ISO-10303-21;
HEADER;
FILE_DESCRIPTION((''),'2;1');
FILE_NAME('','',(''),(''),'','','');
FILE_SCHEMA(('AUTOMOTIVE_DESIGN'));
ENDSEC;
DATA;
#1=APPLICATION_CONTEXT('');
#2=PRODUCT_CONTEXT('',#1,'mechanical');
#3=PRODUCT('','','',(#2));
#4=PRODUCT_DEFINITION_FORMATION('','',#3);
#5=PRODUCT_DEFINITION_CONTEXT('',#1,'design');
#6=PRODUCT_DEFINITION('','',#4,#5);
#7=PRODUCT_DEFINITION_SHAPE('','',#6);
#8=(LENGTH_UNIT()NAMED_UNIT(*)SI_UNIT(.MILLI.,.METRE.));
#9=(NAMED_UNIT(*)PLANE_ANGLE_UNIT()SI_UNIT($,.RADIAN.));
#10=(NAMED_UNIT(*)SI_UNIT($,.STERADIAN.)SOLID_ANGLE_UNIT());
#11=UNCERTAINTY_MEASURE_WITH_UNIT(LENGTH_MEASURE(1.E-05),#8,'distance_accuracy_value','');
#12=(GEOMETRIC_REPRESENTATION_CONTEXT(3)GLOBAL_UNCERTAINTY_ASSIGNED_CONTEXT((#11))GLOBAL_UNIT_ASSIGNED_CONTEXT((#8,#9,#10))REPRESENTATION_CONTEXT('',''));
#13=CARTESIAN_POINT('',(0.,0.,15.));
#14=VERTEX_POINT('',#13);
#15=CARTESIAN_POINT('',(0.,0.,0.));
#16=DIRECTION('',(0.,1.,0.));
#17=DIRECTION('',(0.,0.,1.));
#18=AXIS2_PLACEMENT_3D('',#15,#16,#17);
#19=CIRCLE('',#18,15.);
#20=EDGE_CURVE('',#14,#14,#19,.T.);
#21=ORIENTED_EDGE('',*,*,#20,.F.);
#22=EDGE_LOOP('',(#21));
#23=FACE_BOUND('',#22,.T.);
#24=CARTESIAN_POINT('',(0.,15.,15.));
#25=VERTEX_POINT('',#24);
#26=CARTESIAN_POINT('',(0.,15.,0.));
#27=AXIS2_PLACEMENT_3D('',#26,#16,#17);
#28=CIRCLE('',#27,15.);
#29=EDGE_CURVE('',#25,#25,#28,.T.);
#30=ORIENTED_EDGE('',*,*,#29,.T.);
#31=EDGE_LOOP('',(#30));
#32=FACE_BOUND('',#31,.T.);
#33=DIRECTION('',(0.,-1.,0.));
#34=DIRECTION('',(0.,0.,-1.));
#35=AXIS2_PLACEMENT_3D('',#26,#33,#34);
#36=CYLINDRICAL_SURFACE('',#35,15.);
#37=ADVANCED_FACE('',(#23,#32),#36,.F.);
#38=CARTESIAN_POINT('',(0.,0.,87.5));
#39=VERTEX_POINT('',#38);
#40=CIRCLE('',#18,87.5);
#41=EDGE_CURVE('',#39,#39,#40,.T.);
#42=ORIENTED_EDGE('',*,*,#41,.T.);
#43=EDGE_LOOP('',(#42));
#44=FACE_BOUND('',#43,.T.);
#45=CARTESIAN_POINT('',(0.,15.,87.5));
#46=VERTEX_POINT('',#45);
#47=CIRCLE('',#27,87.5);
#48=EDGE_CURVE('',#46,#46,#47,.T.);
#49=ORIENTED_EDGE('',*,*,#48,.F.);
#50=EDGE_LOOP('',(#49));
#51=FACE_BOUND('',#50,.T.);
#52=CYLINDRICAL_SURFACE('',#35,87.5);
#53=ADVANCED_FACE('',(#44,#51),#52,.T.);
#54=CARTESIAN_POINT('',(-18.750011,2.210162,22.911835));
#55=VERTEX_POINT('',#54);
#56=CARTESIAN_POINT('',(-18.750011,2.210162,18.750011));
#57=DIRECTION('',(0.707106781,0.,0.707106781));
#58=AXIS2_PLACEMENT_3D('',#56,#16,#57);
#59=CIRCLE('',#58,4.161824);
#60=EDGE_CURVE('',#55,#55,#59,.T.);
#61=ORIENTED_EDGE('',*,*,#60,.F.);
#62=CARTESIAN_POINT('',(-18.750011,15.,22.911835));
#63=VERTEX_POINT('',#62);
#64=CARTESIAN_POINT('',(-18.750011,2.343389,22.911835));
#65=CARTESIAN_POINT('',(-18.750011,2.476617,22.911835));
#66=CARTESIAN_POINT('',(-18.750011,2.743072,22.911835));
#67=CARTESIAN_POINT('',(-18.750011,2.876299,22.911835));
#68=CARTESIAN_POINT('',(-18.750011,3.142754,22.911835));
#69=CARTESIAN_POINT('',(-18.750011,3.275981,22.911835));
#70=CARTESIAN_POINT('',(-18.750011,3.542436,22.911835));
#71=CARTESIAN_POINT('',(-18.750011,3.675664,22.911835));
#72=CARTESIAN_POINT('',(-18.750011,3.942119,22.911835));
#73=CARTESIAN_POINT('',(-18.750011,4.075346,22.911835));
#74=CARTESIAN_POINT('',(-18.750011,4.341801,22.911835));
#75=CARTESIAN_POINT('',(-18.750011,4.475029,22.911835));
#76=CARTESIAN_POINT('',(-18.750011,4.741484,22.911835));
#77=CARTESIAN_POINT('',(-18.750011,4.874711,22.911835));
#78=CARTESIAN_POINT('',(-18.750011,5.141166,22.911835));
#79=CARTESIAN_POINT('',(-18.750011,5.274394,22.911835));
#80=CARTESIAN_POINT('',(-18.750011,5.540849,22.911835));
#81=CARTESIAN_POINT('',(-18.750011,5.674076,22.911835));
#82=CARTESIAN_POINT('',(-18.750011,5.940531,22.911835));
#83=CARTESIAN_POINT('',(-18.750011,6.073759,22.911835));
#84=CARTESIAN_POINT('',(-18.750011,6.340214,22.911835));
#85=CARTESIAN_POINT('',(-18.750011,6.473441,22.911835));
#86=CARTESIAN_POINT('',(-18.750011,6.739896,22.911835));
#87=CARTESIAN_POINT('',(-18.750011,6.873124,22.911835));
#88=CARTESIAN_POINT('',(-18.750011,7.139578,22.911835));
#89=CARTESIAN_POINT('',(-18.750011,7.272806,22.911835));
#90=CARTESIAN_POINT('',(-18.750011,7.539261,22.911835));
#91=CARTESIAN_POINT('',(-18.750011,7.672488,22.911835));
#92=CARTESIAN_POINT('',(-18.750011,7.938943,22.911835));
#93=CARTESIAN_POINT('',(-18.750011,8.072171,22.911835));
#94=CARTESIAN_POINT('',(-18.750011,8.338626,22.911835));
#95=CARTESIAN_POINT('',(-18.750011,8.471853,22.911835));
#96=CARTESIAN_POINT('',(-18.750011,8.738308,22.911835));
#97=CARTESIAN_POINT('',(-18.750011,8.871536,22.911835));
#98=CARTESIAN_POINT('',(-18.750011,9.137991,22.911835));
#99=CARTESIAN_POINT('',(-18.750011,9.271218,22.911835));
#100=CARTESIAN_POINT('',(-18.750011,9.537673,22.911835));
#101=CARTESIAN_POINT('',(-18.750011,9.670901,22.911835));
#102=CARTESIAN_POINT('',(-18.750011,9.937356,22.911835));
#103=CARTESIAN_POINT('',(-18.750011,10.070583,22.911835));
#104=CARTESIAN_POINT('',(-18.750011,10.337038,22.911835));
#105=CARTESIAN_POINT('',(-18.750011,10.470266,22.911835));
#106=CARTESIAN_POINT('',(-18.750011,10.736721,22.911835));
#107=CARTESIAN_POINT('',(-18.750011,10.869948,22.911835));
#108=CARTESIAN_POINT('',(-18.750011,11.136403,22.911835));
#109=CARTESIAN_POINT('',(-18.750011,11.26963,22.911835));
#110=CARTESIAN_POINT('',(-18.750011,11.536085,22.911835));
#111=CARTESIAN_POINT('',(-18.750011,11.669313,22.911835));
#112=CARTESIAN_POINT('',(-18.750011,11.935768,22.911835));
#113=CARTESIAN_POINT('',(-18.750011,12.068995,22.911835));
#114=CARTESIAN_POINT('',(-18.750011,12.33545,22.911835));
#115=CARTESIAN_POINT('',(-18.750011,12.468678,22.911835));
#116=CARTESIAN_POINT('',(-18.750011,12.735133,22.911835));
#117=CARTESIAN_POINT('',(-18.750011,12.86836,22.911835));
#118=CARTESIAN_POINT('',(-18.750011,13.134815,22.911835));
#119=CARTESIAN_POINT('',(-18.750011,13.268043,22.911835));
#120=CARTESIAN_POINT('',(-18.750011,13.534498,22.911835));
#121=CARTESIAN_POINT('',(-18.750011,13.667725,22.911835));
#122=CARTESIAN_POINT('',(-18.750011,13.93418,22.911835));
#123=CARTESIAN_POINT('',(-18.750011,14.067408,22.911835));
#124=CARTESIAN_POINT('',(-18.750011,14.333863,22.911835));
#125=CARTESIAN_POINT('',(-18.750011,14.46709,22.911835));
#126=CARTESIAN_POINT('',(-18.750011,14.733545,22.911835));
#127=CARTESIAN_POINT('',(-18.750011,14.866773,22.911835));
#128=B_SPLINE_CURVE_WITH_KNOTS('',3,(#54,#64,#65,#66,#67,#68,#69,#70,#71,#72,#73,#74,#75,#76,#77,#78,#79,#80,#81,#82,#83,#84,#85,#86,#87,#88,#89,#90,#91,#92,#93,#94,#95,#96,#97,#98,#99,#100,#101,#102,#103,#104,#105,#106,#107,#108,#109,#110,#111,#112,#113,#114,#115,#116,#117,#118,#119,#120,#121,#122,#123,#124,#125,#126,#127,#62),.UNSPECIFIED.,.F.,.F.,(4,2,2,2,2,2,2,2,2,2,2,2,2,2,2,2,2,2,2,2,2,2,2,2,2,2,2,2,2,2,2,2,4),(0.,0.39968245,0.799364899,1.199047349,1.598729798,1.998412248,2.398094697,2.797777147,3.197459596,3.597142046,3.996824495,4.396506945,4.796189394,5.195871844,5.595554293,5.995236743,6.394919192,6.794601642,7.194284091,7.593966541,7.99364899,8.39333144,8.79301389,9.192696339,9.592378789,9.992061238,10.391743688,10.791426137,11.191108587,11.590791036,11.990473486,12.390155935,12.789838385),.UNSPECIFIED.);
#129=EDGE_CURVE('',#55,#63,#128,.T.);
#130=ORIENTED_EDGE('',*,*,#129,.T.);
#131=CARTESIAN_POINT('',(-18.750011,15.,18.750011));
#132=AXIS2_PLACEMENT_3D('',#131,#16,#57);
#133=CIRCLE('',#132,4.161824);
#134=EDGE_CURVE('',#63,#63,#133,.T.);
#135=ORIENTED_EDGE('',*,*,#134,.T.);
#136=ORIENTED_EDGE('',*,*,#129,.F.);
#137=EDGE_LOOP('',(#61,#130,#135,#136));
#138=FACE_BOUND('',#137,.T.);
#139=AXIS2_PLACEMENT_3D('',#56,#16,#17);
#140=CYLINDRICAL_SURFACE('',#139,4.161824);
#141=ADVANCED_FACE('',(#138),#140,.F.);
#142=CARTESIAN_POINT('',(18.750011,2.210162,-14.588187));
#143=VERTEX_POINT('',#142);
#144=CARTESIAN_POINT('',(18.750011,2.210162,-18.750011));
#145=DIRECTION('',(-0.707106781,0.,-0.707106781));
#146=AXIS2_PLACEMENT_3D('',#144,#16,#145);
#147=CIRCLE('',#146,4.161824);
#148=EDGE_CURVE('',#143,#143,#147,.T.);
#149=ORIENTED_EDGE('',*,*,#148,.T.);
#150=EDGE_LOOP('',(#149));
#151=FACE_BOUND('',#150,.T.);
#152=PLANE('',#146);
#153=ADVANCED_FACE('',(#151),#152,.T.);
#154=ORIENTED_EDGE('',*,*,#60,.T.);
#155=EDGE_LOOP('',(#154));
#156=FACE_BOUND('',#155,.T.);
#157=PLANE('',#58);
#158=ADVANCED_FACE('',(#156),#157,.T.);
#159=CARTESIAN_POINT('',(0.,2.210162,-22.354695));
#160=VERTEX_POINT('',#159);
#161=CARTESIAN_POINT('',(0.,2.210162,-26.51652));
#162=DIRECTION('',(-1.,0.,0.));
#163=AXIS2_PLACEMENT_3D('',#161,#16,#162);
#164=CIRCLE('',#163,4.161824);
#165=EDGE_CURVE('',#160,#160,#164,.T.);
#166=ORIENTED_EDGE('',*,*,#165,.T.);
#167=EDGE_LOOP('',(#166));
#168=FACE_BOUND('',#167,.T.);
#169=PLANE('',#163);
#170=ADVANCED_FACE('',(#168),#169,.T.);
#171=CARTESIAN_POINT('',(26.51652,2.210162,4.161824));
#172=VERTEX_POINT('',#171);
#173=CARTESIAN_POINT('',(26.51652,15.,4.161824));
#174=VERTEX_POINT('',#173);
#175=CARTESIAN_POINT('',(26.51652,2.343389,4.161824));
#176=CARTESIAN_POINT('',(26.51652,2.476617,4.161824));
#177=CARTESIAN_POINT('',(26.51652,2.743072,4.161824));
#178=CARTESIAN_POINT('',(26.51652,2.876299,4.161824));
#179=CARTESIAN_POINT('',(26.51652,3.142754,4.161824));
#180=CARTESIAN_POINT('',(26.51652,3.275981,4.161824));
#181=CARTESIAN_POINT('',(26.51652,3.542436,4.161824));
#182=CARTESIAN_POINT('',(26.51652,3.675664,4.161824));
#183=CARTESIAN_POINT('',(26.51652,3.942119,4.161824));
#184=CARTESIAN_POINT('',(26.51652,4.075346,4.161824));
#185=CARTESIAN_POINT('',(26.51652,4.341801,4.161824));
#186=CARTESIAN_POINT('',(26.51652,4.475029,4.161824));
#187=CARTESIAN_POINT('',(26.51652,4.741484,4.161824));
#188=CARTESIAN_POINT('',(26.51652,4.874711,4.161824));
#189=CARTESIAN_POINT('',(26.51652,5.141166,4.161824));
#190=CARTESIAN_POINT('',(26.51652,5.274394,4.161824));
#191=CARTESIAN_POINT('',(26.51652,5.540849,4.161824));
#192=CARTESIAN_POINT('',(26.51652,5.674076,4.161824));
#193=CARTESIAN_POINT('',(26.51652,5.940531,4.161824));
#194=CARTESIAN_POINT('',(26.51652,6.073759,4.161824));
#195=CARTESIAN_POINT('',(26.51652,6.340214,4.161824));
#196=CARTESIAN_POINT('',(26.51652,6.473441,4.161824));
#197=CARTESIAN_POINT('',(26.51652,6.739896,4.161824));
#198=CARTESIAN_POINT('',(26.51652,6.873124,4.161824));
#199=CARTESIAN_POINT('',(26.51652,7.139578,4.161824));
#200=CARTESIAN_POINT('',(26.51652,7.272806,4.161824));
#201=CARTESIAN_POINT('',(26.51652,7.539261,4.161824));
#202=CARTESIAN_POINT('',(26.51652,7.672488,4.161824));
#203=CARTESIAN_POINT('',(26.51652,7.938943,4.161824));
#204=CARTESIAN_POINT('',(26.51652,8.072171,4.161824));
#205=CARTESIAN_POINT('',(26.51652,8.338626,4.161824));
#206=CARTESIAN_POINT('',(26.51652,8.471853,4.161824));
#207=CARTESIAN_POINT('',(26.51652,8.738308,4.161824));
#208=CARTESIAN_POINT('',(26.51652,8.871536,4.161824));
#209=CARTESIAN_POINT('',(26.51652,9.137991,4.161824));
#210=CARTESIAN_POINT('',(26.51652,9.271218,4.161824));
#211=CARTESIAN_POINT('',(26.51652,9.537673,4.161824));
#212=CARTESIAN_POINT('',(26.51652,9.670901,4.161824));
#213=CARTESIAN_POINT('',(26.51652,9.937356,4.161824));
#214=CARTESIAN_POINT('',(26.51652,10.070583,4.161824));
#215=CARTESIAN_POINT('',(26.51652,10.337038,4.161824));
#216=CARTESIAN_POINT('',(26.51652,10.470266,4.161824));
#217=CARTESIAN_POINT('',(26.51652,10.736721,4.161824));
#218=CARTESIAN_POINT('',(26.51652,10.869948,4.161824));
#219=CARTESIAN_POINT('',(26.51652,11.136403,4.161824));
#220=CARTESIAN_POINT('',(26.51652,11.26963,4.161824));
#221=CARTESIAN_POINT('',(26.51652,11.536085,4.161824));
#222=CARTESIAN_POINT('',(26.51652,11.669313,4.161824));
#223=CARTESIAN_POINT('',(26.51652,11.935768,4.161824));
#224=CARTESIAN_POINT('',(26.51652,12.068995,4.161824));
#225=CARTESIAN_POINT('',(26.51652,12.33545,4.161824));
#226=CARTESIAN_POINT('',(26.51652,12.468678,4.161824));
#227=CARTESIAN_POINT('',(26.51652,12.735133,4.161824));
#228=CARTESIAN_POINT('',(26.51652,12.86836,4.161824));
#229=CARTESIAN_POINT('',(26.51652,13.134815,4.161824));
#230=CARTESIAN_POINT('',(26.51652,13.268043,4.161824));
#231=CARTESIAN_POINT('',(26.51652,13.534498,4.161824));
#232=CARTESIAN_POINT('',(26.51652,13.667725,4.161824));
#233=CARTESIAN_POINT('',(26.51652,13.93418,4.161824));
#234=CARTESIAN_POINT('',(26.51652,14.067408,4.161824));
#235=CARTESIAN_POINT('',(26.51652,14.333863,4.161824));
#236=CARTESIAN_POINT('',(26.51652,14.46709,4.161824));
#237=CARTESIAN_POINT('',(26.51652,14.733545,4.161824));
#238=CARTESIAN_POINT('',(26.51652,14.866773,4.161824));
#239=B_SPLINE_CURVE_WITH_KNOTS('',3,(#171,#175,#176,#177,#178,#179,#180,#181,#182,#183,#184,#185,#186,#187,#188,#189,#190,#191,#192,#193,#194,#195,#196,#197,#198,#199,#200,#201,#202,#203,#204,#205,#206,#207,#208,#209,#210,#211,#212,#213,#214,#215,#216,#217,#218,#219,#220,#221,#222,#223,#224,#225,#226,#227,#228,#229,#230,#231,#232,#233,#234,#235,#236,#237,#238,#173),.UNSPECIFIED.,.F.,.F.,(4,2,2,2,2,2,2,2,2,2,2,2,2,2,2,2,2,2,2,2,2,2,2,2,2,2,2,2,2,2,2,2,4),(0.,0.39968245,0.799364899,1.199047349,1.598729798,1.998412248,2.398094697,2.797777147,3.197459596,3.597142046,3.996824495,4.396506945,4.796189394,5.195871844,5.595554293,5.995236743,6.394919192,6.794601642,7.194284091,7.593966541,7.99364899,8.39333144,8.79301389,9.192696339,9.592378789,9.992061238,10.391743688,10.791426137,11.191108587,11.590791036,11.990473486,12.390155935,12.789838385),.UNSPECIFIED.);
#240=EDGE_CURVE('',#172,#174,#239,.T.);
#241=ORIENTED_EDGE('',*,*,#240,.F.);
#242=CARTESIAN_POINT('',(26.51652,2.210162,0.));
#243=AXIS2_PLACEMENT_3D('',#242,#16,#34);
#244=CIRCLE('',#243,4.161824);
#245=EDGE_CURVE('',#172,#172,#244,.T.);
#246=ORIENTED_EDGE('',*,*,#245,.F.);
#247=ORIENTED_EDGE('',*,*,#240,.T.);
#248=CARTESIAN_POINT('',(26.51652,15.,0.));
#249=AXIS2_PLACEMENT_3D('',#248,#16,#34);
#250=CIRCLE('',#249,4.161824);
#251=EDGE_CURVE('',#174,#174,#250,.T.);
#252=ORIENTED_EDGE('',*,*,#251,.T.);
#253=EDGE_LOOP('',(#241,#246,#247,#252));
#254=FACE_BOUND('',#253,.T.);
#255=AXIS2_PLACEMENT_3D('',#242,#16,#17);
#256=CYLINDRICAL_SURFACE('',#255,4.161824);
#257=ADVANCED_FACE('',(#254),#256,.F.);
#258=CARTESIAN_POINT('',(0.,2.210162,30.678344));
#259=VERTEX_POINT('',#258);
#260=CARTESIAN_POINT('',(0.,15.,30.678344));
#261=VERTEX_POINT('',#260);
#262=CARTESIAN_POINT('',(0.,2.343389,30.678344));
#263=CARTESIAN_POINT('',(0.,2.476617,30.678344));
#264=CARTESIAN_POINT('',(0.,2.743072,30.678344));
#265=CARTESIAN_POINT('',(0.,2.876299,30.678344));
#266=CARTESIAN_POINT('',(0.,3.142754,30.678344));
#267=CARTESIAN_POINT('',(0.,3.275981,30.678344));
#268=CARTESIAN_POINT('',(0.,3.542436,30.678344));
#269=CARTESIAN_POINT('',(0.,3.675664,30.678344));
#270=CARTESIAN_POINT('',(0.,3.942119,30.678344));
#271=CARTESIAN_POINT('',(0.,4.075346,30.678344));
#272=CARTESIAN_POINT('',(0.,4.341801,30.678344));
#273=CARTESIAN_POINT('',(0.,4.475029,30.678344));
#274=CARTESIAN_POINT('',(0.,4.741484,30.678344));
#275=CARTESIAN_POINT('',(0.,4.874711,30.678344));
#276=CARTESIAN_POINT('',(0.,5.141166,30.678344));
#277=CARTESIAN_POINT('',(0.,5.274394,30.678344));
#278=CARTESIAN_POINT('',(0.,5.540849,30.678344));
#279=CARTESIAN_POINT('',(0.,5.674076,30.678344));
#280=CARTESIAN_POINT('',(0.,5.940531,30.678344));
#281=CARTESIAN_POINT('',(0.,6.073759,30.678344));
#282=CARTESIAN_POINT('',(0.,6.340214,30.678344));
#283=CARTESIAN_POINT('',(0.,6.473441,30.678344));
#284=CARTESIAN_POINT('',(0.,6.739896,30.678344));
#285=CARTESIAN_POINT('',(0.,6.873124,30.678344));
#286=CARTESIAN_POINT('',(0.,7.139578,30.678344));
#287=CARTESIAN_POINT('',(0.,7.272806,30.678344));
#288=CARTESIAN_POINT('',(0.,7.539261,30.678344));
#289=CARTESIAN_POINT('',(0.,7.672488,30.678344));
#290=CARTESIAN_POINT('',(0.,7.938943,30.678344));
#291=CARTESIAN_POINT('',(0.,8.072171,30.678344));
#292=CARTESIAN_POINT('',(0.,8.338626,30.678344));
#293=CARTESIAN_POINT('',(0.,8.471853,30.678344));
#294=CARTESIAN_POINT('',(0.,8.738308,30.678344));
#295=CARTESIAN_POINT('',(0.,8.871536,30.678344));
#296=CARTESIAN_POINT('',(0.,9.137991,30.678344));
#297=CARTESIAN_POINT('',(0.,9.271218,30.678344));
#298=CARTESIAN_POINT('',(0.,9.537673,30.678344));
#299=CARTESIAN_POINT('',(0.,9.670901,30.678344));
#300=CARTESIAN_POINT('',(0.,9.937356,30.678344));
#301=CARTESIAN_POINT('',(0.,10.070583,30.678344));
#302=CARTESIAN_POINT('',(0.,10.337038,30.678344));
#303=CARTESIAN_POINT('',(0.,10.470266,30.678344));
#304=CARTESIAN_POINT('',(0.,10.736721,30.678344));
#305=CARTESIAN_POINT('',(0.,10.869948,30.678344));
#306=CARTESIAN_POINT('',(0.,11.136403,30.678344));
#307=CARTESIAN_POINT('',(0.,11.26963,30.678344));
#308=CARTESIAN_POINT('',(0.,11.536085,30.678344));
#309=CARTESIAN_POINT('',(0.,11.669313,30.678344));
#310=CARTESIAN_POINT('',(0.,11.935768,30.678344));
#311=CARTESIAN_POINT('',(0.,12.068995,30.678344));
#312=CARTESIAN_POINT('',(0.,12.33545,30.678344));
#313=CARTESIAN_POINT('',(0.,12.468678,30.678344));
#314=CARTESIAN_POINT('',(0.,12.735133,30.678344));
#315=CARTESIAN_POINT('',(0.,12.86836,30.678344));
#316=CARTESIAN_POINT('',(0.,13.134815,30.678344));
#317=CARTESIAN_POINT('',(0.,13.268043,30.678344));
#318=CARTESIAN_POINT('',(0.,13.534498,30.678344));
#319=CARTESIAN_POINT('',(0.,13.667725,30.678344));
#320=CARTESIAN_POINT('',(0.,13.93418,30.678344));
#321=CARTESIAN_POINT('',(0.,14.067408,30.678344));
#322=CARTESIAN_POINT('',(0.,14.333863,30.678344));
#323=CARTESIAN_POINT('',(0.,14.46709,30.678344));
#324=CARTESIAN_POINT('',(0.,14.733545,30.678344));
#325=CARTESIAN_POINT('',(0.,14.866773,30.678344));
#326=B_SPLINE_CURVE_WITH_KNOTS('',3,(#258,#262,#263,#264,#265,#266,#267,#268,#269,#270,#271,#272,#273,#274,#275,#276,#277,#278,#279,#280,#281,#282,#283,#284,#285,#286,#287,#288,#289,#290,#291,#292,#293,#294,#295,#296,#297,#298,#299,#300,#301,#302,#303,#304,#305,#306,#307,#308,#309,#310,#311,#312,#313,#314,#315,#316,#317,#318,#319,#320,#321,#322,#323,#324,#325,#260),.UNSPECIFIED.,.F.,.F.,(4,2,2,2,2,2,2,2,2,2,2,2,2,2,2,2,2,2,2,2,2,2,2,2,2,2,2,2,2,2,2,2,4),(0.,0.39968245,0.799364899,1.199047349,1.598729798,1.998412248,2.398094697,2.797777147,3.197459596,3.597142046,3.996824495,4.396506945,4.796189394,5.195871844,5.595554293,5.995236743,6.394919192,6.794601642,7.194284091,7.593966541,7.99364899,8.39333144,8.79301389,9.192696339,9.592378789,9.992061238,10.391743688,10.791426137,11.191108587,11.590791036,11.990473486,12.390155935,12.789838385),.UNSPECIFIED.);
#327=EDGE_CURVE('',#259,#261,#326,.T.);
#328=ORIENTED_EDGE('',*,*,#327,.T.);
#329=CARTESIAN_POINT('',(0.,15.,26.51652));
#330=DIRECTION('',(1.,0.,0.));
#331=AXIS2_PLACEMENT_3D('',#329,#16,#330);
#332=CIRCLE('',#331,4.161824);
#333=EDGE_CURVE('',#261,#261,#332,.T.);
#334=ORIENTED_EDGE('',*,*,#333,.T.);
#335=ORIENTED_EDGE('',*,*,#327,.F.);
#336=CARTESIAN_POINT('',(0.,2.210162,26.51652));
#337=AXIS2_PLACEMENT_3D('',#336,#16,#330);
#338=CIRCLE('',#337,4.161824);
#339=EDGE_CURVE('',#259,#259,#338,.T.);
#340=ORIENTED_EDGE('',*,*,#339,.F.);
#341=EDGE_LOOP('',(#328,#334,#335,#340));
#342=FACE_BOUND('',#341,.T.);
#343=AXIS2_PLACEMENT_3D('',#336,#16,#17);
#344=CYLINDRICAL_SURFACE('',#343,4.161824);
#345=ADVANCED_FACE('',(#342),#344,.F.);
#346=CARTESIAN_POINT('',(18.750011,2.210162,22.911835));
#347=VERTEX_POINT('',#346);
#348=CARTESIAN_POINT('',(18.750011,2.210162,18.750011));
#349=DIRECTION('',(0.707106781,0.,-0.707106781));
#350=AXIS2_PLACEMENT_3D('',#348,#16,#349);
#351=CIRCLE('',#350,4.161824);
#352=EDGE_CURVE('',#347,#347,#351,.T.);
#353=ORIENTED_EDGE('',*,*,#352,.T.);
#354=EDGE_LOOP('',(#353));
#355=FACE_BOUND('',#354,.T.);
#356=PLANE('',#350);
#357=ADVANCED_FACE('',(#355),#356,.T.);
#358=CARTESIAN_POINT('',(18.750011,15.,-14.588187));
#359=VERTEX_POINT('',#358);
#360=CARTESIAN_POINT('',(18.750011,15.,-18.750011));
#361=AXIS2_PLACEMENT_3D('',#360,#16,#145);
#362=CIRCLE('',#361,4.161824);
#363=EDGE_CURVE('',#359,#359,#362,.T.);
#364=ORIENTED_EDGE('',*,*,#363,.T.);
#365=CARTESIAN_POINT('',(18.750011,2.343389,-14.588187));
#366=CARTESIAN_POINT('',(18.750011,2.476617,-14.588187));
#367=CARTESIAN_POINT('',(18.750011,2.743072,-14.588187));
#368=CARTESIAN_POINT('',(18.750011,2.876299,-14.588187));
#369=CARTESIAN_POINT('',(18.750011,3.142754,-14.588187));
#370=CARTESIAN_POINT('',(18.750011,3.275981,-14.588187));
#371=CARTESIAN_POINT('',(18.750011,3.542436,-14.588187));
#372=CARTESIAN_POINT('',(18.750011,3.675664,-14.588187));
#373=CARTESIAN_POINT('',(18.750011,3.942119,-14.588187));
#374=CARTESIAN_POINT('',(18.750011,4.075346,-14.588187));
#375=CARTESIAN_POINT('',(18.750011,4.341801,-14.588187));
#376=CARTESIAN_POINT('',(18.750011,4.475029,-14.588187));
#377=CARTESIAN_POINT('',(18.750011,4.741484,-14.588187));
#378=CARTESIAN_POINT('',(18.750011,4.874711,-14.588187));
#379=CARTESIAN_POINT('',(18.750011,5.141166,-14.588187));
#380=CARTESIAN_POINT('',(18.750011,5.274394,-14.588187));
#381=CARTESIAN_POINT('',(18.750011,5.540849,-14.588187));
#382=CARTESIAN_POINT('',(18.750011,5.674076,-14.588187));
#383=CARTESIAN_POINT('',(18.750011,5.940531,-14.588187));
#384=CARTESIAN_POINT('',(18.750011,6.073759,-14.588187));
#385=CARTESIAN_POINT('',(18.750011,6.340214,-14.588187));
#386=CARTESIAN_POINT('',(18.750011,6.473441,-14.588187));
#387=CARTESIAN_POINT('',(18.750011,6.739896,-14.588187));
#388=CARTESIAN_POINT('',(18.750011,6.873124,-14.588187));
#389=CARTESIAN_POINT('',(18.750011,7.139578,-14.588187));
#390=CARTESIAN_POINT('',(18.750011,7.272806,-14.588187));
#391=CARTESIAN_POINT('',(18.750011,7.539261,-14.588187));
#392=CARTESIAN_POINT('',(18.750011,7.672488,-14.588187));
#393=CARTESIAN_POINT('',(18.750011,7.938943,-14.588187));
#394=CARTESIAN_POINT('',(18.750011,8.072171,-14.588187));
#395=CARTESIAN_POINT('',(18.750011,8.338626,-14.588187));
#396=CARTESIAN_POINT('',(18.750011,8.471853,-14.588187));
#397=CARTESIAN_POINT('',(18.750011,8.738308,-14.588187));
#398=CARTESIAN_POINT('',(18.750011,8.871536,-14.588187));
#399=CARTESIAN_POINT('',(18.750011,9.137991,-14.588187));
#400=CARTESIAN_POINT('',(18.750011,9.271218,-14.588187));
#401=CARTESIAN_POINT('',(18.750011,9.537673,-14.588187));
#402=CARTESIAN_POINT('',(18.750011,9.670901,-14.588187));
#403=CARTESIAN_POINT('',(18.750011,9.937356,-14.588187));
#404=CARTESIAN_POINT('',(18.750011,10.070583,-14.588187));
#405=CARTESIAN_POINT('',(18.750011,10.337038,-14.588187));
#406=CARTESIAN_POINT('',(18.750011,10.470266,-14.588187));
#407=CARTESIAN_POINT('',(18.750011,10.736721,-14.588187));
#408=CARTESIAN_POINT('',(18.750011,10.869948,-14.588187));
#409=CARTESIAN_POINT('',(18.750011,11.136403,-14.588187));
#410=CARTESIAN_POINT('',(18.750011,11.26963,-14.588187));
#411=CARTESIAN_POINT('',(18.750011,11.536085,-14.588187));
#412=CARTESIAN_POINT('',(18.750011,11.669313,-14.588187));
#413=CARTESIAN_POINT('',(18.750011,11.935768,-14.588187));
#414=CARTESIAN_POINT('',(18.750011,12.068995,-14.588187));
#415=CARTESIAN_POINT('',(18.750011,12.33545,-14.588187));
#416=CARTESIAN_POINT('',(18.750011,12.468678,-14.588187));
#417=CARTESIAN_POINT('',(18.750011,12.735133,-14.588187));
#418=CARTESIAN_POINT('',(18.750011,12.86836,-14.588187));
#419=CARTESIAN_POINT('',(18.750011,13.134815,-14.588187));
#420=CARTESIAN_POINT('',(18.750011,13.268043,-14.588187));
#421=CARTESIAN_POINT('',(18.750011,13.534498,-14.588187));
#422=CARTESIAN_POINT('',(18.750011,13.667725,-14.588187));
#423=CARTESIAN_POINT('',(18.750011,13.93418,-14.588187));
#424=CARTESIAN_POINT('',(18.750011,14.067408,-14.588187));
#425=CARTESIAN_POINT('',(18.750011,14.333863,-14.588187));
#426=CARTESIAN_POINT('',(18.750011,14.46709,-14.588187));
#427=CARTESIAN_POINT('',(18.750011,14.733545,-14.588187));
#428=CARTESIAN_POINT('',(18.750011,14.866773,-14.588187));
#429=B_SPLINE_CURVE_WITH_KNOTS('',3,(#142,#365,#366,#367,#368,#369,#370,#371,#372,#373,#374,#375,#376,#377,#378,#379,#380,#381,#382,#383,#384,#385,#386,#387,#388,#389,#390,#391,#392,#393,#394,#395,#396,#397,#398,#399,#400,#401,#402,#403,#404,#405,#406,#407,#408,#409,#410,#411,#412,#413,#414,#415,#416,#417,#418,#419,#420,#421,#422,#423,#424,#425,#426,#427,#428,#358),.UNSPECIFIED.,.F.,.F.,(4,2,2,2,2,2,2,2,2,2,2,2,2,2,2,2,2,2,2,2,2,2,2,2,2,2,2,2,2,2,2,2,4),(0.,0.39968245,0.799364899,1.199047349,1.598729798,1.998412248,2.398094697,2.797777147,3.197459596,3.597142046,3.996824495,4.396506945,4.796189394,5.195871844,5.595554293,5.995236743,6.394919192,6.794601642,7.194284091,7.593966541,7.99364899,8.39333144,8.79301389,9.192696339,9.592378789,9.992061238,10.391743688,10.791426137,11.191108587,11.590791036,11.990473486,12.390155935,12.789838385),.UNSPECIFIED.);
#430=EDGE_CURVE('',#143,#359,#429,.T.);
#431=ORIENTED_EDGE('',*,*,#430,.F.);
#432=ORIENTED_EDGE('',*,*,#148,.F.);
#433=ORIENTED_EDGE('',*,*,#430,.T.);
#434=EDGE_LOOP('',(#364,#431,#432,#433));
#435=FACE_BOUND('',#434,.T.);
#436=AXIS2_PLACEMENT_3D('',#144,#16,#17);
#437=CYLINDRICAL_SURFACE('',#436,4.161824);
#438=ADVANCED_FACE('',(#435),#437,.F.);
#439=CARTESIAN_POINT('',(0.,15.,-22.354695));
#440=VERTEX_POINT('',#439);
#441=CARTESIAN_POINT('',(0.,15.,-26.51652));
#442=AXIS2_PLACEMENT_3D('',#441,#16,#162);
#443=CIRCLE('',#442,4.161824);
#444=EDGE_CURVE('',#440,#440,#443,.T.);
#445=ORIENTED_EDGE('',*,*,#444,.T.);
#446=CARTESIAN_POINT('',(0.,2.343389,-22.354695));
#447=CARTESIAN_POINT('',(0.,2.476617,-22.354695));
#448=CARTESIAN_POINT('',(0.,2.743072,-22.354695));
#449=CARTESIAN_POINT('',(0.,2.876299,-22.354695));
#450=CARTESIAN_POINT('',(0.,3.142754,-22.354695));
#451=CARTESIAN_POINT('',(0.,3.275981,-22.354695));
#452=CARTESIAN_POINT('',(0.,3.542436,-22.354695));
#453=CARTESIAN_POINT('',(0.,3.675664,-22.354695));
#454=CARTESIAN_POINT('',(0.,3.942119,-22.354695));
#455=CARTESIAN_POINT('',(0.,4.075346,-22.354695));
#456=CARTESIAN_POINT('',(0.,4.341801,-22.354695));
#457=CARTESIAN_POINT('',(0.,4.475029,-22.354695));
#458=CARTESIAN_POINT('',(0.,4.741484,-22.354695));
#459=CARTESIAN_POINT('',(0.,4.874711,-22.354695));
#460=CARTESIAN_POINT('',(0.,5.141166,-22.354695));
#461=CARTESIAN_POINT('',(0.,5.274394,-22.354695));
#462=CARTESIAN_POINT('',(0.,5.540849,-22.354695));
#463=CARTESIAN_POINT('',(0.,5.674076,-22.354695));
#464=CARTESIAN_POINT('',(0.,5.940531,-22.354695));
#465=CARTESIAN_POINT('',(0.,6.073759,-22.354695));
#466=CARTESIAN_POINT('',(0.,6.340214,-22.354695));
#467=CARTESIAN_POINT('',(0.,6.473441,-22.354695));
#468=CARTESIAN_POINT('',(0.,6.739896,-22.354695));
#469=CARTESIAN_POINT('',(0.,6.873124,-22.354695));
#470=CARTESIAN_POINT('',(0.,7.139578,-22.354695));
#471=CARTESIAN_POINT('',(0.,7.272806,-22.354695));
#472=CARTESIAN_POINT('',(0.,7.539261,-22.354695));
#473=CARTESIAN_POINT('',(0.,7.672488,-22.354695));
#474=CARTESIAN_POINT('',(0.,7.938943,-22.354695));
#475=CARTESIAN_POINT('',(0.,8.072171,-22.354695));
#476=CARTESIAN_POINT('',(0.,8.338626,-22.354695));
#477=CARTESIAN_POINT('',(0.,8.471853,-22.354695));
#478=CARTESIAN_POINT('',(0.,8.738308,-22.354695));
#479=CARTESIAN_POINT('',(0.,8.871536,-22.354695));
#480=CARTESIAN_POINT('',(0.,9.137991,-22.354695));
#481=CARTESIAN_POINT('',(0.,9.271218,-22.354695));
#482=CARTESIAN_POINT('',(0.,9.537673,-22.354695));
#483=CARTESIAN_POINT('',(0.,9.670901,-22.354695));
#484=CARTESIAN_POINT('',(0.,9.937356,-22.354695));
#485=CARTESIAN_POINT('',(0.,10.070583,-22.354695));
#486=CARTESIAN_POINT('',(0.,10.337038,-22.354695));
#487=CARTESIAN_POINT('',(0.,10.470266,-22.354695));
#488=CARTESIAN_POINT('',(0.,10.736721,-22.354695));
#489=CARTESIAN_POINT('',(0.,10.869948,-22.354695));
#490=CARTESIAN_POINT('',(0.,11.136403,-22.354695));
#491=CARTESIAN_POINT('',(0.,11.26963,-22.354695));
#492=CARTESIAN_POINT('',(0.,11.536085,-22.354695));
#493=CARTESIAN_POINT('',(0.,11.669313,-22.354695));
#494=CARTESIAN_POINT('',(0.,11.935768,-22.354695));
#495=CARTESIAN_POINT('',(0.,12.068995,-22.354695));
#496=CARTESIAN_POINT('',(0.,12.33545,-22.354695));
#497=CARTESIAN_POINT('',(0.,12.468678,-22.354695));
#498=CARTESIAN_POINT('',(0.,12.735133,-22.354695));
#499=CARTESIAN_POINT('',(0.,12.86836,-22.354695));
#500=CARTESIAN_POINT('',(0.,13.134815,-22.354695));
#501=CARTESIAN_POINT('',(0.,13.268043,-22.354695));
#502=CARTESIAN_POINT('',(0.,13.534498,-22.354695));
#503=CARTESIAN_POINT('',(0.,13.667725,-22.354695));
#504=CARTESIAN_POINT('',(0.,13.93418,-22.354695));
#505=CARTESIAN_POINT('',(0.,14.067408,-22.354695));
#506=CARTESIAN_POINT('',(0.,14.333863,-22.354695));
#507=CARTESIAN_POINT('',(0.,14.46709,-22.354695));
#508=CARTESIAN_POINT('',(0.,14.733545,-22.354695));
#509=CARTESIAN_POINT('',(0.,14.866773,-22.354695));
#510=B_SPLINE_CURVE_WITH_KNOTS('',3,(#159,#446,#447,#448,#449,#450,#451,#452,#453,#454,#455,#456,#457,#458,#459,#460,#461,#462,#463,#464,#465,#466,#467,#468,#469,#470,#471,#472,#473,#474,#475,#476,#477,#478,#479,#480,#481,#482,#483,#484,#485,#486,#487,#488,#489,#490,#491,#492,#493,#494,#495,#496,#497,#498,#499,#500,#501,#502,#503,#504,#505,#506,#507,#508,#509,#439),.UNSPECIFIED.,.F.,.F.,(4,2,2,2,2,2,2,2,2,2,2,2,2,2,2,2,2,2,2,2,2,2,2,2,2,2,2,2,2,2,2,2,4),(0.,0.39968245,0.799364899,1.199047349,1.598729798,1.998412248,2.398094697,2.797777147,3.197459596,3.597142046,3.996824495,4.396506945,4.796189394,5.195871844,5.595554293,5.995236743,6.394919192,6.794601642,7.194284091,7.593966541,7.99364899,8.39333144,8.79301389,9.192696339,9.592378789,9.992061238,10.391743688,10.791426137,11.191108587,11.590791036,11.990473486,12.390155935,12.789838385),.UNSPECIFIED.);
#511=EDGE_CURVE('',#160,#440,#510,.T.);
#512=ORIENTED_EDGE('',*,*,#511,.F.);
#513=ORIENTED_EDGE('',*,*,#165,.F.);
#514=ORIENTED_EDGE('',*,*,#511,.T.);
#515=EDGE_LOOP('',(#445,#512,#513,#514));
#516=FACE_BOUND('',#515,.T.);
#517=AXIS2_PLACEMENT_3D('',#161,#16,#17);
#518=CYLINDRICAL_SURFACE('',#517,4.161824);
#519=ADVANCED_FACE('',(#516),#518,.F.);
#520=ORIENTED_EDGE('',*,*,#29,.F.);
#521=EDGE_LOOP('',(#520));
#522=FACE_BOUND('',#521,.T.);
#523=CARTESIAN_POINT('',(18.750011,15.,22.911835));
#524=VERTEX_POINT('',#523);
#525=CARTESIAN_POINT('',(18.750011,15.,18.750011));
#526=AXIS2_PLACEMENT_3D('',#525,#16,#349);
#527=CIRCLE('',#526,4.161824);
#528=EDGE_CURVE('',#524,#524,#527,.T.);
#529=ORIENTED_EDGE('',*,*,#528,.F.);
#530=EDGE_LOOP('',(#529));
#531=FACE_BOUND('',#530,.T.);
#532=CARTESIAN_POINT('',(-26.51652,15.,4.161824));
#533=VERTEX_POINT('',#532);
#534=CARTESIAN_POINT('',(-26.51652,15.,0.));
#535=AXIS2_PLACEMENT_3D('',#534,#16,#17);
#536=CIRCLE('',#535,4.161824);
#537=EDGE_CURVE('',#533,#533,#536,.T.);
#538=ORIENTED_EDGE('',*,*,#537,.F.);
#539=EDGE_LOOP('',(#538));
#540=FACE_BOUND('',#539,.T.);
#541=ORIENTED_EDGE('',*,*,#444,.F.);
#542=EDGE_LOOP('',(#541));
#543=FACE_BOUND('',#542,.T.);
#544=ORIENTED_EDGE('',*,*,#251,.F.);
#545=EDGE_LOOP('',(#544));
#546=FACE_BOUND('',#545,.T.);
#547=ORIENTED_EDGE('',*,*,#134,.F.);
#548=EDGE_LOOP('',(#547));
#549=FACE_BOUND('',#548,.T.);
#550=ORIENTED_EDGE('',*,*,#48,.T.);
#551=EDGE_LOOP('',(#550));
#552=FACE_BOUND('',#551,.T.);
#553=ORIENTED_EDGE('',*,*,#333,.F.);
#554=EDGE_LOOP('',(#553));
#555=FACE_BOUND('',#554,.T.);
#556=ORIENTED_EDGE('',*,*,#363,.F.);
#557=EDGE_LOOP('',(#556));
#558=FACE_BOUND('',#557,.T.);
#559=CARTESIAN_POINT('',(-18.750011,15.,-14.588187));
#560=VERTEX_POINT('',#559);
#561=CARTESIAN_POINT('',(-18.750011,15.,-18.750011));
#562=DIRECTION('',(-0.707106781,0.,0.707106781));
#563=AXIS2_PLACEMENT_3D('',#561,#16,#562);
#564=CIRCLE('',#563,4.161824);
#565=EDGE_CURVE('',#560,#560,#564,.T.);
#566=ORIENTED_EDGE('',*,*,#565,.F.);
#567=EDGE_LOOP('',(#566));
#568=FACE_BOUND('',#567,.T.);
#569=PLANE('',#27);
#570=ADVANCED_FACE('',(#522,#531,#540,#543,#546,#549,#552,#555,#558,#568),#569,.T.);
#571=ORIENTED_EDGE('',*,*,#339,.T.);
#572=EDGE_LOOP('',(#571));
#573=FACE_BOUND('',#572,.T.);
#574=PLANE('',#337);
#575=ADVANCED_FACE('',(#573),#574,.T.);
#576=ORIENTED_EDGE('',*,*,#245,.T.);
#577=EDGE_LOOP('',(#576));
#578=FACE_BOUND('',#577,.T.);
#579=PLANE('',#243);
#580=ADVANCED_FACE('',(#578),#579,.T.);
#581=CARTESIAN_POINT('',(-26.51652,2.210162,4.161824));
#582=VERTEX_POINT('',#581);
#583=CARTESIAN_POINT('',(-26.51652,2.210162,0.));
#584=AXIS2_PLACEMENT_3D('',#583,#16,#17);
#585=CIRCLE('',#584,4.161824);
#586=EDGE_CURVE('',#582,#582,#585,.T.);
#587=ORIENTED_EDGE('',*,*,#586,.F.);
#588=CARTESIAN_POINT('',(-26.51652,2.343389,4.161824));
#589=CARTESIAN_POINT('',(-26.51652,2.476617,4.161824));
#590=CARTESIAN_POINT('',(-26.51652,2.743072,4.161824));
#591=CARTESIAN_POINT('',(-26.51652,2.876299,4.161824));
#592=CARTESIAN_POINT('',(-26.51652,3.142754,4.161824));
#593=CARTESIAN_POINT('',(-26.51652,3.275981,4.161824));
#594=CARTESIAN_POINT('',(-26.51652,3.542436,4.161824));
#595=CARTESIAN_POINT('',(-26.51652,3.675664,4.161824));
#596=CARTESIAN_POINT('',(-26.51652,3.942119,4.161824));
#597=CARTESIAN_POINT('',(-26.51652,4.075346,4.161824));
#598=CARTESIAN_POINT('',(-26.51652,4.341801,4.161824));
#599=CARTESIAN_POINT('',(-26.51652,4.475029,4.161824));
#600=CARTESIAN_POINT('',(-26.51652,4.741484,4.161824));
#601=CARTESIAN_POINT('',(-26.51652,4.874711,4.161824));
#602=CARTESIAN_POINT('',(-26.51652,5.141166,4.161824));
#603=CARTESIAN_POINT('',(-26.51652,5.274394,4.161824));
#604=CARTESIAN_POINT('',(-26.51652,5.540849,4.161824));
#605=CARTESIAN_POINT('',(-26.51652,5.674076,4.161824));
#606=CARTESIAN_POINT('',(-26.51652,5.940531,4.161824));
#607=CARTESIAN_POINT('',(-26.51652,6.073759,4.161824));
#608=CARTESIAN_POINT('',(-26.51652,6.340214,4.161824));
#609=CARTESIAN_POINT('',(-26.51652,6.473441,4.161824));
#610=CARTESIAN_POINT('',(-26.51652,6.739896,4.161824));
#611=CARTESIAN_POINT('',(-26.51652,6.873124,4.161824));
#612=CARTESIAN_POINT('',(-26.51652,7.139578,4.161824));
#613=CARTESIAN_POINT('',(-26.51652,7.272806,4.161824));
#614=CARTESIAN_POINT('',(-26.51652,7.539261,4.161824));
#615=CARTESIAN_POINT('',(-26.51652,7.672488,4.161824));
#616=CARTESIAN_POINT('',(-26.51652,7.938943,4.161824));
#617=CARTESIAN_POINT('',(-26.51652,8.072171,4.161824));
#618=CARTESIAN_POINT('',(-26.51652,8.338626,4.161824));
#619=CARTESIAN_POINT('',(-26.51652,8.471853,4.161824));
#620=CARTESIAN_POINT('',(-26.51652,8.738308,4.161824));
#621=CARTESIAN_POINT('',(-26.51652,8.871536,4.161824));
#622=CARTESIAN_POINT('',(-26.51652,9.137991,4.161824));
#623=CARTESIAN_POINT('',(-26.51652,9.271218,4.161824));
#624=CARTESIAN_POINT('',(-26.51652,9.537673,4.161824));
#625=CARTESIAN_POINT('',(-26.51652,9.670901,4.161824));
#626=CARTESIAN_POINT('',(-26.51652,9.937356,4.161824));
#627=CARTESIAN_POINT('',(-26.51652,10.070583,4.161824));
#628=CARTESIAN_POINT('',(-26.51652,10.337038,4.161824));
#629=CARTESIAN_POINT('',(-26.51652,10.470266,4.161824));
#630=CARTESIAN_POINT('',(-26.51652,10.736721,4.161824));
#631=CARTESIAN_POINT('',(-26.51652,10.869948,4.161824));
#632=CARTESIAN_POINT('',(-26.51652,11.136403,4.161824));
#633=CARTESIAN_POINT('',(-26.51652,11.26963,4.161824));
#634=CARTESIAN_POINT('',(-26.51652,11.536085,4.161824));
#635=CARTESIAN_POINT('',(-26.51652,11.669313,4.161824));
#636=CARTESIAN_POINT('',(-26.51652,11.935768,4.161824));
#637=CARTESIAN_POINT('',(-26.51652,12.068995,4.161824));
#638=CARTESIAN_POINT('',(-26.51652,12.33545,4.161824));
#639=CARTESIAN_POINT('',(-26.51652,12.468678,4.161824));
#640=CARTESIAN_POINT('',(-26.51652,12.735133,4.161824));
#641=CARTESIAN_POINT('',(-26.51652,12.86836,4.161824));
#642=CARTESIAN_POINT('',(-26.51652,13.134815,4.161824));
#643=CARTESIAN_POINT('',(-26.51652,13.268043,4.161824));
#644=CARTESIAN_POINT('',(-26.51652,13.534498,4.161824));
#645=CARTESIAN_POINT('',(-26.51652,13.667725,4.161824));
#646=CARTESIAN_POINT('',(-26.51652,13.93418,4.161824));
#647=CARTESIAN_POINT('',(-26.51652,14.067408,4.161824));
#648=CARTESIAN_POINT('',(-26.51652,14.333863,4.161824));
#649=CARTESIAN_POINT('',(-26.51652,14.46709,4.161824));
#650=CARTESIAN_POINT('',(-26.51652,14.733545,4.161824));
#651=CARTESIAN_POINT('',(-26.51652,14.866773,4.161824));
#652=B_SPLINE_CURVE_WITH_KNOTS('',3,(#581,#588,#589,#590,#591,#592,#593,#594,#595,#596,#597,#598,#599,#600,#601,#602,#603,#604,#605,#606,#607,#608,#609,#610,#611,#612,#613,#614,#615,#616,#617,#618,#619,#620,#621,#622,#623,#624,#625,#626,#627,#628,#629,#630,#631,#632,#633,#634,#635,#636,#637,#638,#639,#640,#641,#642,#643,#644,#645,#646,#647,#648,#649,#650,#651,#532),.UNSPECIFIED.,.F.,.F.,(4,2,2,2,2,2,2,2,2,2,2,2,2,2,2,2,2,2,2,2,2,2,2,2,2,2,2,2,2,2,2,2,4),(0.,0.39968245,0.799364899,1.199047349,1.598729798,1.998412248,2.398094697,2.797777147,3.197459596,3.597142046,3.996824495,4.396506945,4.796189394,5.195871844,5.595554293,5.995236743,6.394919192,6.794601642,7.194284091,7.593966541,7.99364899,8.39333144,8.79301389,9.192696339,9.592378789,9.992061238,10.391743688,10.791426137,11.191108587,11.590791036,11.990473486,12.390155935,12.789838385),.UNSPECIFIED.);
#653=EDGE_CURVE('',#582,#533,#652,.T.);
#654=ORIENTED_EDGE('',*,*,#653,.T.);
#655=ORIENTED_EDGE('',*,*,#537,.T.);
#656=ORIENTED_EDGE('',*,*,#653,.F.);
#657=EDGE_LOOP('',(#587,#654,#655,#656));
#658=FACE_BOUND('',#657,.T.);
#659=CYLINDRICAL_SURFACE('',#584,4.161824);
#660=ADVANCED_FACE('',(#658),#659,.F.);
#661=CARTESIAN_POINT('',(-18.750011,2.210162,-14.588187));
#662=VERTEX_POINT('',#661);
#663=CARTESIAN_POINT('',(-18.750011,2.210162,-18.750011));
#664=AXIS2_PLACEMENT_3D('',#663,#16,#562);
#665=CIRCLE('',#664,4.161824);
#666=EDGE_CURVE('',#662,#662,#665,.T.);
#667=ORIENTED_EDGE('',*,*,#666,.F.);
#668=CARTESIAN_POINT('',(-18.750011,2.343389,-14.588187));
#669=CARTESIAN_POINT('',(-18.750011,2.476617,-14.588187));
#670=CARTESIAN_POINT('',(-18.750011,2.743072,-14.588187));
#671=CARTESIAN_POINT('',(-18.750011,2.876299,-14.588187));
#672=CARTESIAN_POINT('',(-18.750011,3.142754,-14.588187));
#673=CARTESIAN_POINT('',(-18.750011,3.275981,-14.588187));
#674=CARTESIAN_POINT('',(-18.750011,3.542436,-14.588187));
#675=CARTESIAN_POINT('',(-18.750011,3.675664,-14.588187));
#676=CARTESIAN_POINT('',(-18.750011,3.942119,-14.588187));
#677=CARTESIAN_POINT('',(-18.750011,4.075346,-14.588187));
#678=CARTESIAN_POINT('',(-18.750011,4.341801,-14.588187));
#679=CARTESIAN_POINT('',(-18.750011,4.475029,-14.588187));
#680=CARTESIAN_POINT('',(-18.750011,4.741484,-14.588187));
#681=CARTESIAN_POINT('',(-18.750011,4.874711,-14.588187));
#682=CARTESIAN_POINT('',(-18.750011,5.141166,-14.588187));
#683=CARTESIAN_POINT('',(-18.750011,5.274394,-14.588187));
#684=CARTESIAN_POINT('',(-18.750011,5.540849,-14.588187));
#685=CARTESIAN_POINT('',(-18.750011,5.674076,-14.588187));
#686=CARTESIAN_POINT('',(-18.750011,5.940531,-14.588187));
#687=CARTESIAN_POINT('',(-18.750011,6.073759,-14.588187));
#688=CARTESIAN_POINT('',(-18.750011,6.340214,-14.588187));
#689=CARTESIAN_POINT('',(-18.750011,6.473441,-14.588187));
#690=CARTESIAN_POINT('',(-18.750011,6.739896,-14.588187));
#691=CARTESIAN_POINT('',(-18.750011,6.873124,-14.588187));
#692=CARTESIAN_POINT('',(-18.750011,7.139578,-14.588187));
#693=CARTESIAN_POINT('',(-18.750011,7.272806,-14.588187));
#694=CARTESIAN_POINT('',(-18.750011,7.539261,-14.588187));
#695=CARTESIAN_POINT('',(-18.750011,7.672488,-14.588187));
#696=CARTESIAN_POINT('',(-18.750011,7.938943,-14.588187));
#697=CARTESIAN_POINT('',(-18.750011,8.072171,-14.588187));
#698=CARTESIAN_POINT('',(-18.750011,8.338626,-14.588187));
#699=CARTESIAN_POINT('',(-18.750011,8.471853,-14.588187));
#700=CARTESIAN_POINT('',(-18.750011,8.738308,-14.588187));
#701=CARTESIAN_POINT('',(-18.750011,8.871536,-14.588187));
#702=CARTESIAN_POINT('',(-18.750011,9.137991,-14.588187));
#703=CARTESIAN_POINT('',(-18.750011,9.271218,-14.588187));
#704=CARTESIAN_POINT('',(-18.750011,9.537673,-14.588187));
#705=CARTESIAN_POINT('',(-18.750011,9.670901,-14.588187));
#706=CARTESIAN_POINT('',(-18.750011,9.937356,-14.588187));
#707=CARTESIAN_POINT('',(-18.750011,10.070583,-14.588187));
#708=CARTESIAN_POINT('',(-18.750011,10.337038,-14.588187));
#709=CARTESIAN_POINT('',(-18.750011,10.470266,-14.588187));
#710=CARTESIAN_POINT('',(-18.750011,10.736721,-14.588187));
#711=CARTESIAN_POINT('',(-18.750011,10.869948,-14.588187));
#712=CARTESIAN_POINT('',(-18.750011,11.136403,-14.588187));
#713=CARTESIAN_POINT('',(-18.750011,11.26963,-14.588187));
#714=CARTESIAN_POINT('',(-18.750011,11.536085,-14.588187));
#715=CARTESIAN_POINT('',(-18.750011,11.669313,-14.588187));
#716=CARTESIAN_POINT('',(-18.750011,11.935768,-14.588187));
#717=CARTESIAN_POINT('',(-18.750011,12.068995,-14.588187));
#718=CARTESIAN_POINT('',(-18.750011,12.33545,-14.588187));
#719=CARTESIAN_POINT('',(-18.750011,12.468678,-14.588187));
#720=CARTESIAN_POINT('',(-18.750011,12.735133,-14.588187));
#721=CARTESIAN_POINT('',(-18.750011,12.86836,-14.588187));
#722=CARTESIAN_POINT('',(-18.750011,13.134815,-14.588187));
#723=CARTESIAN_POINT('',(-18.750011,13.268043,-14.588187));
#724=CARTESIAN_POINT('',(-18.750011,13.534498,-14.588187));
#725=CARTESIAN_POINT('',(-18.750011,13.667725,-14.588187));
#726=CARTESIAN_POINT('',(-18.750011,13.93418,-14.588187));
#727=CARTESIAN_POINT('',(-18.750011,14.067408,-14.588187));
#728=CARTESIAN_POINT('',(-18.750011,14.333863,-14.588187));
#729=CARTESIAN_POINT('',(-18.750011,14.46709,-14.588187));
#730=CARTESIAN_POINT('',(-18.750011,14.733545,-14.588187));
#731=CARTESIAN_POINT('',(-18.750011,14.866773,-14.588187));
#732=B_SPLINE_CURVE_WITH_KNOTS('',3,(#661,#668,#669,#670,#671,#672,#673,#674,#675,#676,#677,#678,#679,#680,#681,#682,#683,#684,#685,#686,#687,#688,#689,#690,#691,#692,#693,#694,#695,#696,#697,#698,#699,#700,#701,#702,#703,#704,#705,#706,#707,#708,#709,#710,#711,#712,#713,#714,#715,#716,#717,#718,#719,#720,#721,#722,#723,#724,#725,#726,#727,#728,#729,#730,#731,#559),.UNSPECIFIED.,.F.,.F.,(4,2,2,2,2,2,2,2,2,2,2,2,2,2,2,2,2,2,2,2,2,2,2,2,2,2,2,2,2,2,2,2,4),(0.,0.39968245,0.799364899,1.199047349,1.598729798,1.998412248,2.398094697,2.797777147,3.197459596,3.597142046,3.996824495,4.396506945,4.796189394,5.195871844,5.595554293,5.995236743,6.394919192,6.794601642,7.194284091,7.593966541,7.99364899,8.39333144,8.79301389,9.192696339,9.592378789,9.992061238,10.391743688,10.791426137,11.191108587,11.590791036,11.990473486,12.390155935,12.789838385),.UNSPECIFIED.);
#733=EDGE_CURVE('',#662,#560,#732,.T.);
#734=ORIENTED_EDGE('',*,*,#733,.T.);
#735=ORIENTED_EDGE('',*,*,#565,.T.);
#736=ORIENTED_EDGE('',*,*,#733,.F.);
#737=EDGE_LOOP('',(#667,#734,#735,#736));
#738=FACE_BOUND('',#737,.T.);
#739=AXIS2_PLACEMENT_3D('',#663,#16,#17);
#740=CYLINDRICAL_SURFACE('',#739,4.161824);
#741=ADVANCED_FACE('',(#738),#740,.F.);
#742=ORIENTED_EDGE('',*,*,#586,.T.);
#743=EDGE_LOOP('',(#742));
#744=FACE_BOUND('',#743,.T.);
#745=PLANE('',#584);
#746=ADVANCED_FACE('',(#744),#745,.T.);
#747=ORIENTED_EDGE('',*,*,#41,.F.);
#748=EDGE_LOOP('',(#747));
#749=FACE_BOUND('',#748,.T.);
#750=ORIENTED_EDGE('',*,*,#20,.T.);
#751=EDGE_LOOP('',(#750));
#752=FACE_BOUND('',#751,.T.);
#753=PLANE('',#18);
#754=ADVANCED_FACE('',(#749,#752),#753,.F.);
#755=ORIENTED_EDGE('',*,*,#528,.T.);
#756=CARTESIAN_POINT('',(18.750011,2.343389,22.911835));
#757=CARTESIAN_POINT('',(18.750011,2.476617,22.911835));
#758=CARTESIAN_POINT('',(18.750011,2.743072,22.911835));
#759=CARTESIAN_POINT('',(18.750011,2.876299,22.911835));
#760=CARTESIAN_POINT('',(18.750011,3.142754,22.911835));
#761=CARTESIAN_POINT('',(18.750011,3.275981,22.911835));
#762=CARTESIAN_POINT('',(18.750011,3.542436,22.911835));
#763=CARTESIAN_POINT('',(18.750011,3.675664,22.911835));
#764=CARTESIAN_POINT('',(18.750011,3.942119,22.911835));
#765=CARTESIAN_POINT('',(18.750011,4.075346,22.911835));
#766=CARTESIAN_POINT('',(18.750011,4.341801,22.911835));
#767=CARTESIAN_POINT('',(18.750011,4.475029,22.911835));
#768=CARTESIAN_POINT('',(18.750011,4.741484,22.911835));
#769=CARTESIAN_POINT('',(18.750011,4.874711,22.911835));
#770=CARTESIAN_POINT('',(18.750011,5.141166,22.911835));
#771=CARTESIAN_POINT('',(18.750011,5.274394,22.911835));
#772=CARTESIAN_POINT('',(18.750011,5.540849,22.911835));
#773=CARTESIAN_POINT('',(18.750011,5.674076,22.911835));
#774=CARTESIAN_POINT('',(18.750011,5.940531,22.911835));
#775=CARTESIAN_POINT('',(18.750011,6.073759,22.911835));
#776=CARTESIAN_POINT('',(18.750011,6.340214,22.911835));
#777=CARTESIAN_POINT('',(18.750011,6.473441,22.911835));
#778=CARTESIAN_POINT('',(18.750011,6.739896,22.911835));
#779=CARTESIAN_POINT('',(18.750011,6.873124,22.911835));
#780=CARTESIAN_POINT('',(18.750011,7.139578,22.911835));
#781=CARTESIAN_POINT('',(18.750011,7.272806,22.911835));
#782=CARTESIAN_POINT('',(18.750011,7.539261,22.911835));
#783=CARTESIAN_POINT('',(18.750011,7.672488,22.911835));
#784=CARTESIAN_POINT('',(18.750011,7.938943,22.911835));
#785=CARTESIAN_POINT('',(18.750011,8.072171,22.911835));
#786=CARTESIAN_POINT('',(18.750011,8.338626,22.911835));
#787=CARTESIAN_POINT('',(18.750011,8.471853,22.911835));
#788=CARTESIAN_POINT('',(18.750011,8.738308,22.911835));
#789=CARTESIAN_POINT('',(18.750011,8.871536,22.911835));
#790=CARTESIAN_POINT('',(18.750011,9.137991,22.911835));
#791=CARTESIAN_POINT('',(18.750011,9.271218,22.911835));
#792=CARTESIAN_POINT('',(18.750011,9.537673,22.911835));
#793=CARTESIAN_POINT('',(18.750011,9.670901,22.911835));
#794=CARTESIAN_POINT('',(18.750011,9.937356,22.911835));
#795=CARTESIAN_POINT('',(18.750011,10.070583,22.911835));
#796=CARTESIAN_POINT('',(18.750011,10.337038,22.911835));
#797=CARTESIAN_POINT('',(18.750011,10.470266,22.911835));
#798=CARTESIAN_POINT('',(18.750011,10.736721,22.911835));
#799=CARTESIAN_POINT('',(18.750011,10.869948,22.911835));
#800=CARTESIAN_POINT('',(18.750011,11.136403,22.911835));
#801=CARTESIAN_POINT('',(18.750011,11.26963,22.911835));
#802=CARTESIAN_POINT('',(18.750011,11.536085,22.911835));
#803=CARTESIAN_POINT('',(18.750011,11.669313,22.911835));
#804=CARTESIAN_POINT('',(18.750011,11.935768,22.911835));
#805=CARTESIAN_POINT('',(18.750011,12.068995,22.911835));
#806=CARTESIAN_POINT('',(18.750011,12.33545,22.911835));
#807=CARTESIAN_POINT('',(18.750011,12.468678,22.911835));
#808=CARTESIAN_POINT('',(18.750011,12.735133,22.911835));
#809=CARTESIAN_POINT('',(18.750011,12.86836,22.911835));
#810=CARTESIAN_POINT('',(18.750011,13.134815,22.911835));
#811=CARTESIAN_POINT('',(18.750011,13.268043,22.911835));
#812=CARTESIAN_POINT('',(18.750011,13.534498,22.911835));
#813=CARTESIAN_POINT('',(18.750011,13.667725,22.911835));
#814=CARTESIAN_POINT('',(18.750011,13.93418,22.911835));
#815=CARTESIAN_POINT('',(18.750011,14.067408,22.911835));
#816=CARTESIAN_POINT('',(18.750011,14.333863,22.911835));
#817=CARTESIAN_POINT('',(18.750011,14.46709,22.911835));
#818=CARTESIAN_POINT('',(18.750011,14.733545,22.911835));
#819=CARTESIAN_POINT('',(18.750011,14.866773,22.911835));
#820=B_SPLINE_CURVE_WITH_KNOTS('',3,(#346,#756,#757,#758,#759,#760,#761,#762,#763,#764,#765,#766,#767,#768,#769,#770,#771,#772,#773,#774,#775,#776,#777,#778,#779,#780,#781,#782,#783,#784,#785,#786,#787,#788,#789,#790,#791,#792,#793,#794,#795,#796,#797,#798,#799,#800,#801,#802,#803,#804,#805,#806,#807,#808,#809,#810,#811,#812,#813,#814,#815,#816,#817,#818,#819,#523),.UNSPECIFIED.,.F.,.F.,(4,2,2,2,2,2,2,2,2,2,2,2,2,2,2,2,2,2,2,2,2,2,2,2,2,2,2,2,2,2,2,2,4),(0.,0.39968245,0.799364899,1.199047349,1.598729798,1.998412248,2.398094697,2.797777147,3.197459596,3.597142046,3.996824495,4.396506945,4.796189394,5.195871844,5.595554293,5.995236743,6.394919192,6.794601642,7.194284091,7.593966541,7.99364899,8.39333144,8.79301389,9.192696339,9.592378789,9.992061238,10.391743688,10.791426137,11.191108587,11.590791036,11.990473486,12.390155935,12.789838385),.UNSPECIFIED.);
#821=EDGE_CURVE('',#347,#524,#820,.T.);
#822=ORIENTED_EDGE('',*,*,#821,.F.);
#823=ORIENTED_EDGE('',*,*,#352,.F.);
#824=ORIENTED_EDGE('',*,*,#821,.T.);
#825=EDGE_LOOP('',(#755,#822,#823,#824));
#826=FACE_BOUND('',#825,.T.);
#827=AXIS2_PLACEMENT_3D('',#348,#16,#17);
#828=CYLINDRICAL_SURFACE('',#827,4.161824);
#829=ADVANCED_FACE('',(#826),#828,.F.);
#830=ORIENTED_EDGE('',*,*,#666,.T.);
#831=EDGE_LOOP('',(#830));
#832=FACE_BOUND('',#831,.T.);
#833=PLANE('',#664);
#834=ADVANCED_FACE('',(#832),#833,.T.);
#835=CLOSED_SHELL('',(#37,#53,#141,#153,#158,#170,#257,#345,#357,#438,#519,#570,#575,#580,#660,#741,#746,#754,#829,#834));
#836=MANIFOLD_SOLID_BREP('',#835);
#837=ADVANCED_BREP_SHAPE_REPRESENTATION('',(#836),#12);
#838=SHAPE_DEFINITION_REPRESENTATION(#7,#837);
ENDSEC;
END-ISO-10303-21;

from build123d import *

# Parameters (mm, degrees)
SKETCH1_R           = 87.5
BOSS_EXTRUDE1_DEPTH = 15
SKETCH2_R           = 15
CUT_EXTRUDE1_DEPTH  = 125.649508623
SKETCH3_R           = 4.161824297
CUT_EXTRUDE2_DEPTH  = 12.789838385
CIRPATTERN1_COUNT   = 8


with BuildPart() as part:
    # Sketch1 → Boss-Extrude1 (new body)
    with BuildSketch(Plane(origin=(0, 0, 0), x_dir=(1, 0, 0), z_dir=(0, 1, 0))):
        Circle(SKETCH1_R)
    extrude(amount=BOSS_EXTRUDE1_DEPTH)

    # Sketch2 → Cut-Extrude1 (cut, through all)
    with BuildSketch(Plane(origin=(0, 0, 0), x_dir=(1, 0, 0), z_dir=(0, 1, 0))):
        Circle(SKETCH2_R)
    extrude(amount=CUT_EXTRUDE1_DEPTH, mode=Mode.SUBTRACT)

    # Sketch3 → Cut-Extrude2 (cut)
    with BuildSketch(Plane(origin=(0, 15, 0), x_dir=(1, 0, 0), z_dir=(0, 1, 0))):
        with Locations((-26.516519586, 0)):
            Circle(SKETCH3_R)
    cut_extrude2 = extrude(amount=-CUT_EXTRUDE2_DEPTH, mode=Mode.SUBTRACT)

    # CirPattern1: Cut-Extrude2 ×8 about axis
    cirpattern1_axis = Axis((0, 0, 0), (0, 1, 0))
    for i in range(1, CIRPATTERN1_COUNT):
        add(cut_extrude2.rotate(cirpattern1_axis, i * 360 / CIRPATTERN1_COUNT), mode=Mode.SUBTRACT)


solid = part.part
